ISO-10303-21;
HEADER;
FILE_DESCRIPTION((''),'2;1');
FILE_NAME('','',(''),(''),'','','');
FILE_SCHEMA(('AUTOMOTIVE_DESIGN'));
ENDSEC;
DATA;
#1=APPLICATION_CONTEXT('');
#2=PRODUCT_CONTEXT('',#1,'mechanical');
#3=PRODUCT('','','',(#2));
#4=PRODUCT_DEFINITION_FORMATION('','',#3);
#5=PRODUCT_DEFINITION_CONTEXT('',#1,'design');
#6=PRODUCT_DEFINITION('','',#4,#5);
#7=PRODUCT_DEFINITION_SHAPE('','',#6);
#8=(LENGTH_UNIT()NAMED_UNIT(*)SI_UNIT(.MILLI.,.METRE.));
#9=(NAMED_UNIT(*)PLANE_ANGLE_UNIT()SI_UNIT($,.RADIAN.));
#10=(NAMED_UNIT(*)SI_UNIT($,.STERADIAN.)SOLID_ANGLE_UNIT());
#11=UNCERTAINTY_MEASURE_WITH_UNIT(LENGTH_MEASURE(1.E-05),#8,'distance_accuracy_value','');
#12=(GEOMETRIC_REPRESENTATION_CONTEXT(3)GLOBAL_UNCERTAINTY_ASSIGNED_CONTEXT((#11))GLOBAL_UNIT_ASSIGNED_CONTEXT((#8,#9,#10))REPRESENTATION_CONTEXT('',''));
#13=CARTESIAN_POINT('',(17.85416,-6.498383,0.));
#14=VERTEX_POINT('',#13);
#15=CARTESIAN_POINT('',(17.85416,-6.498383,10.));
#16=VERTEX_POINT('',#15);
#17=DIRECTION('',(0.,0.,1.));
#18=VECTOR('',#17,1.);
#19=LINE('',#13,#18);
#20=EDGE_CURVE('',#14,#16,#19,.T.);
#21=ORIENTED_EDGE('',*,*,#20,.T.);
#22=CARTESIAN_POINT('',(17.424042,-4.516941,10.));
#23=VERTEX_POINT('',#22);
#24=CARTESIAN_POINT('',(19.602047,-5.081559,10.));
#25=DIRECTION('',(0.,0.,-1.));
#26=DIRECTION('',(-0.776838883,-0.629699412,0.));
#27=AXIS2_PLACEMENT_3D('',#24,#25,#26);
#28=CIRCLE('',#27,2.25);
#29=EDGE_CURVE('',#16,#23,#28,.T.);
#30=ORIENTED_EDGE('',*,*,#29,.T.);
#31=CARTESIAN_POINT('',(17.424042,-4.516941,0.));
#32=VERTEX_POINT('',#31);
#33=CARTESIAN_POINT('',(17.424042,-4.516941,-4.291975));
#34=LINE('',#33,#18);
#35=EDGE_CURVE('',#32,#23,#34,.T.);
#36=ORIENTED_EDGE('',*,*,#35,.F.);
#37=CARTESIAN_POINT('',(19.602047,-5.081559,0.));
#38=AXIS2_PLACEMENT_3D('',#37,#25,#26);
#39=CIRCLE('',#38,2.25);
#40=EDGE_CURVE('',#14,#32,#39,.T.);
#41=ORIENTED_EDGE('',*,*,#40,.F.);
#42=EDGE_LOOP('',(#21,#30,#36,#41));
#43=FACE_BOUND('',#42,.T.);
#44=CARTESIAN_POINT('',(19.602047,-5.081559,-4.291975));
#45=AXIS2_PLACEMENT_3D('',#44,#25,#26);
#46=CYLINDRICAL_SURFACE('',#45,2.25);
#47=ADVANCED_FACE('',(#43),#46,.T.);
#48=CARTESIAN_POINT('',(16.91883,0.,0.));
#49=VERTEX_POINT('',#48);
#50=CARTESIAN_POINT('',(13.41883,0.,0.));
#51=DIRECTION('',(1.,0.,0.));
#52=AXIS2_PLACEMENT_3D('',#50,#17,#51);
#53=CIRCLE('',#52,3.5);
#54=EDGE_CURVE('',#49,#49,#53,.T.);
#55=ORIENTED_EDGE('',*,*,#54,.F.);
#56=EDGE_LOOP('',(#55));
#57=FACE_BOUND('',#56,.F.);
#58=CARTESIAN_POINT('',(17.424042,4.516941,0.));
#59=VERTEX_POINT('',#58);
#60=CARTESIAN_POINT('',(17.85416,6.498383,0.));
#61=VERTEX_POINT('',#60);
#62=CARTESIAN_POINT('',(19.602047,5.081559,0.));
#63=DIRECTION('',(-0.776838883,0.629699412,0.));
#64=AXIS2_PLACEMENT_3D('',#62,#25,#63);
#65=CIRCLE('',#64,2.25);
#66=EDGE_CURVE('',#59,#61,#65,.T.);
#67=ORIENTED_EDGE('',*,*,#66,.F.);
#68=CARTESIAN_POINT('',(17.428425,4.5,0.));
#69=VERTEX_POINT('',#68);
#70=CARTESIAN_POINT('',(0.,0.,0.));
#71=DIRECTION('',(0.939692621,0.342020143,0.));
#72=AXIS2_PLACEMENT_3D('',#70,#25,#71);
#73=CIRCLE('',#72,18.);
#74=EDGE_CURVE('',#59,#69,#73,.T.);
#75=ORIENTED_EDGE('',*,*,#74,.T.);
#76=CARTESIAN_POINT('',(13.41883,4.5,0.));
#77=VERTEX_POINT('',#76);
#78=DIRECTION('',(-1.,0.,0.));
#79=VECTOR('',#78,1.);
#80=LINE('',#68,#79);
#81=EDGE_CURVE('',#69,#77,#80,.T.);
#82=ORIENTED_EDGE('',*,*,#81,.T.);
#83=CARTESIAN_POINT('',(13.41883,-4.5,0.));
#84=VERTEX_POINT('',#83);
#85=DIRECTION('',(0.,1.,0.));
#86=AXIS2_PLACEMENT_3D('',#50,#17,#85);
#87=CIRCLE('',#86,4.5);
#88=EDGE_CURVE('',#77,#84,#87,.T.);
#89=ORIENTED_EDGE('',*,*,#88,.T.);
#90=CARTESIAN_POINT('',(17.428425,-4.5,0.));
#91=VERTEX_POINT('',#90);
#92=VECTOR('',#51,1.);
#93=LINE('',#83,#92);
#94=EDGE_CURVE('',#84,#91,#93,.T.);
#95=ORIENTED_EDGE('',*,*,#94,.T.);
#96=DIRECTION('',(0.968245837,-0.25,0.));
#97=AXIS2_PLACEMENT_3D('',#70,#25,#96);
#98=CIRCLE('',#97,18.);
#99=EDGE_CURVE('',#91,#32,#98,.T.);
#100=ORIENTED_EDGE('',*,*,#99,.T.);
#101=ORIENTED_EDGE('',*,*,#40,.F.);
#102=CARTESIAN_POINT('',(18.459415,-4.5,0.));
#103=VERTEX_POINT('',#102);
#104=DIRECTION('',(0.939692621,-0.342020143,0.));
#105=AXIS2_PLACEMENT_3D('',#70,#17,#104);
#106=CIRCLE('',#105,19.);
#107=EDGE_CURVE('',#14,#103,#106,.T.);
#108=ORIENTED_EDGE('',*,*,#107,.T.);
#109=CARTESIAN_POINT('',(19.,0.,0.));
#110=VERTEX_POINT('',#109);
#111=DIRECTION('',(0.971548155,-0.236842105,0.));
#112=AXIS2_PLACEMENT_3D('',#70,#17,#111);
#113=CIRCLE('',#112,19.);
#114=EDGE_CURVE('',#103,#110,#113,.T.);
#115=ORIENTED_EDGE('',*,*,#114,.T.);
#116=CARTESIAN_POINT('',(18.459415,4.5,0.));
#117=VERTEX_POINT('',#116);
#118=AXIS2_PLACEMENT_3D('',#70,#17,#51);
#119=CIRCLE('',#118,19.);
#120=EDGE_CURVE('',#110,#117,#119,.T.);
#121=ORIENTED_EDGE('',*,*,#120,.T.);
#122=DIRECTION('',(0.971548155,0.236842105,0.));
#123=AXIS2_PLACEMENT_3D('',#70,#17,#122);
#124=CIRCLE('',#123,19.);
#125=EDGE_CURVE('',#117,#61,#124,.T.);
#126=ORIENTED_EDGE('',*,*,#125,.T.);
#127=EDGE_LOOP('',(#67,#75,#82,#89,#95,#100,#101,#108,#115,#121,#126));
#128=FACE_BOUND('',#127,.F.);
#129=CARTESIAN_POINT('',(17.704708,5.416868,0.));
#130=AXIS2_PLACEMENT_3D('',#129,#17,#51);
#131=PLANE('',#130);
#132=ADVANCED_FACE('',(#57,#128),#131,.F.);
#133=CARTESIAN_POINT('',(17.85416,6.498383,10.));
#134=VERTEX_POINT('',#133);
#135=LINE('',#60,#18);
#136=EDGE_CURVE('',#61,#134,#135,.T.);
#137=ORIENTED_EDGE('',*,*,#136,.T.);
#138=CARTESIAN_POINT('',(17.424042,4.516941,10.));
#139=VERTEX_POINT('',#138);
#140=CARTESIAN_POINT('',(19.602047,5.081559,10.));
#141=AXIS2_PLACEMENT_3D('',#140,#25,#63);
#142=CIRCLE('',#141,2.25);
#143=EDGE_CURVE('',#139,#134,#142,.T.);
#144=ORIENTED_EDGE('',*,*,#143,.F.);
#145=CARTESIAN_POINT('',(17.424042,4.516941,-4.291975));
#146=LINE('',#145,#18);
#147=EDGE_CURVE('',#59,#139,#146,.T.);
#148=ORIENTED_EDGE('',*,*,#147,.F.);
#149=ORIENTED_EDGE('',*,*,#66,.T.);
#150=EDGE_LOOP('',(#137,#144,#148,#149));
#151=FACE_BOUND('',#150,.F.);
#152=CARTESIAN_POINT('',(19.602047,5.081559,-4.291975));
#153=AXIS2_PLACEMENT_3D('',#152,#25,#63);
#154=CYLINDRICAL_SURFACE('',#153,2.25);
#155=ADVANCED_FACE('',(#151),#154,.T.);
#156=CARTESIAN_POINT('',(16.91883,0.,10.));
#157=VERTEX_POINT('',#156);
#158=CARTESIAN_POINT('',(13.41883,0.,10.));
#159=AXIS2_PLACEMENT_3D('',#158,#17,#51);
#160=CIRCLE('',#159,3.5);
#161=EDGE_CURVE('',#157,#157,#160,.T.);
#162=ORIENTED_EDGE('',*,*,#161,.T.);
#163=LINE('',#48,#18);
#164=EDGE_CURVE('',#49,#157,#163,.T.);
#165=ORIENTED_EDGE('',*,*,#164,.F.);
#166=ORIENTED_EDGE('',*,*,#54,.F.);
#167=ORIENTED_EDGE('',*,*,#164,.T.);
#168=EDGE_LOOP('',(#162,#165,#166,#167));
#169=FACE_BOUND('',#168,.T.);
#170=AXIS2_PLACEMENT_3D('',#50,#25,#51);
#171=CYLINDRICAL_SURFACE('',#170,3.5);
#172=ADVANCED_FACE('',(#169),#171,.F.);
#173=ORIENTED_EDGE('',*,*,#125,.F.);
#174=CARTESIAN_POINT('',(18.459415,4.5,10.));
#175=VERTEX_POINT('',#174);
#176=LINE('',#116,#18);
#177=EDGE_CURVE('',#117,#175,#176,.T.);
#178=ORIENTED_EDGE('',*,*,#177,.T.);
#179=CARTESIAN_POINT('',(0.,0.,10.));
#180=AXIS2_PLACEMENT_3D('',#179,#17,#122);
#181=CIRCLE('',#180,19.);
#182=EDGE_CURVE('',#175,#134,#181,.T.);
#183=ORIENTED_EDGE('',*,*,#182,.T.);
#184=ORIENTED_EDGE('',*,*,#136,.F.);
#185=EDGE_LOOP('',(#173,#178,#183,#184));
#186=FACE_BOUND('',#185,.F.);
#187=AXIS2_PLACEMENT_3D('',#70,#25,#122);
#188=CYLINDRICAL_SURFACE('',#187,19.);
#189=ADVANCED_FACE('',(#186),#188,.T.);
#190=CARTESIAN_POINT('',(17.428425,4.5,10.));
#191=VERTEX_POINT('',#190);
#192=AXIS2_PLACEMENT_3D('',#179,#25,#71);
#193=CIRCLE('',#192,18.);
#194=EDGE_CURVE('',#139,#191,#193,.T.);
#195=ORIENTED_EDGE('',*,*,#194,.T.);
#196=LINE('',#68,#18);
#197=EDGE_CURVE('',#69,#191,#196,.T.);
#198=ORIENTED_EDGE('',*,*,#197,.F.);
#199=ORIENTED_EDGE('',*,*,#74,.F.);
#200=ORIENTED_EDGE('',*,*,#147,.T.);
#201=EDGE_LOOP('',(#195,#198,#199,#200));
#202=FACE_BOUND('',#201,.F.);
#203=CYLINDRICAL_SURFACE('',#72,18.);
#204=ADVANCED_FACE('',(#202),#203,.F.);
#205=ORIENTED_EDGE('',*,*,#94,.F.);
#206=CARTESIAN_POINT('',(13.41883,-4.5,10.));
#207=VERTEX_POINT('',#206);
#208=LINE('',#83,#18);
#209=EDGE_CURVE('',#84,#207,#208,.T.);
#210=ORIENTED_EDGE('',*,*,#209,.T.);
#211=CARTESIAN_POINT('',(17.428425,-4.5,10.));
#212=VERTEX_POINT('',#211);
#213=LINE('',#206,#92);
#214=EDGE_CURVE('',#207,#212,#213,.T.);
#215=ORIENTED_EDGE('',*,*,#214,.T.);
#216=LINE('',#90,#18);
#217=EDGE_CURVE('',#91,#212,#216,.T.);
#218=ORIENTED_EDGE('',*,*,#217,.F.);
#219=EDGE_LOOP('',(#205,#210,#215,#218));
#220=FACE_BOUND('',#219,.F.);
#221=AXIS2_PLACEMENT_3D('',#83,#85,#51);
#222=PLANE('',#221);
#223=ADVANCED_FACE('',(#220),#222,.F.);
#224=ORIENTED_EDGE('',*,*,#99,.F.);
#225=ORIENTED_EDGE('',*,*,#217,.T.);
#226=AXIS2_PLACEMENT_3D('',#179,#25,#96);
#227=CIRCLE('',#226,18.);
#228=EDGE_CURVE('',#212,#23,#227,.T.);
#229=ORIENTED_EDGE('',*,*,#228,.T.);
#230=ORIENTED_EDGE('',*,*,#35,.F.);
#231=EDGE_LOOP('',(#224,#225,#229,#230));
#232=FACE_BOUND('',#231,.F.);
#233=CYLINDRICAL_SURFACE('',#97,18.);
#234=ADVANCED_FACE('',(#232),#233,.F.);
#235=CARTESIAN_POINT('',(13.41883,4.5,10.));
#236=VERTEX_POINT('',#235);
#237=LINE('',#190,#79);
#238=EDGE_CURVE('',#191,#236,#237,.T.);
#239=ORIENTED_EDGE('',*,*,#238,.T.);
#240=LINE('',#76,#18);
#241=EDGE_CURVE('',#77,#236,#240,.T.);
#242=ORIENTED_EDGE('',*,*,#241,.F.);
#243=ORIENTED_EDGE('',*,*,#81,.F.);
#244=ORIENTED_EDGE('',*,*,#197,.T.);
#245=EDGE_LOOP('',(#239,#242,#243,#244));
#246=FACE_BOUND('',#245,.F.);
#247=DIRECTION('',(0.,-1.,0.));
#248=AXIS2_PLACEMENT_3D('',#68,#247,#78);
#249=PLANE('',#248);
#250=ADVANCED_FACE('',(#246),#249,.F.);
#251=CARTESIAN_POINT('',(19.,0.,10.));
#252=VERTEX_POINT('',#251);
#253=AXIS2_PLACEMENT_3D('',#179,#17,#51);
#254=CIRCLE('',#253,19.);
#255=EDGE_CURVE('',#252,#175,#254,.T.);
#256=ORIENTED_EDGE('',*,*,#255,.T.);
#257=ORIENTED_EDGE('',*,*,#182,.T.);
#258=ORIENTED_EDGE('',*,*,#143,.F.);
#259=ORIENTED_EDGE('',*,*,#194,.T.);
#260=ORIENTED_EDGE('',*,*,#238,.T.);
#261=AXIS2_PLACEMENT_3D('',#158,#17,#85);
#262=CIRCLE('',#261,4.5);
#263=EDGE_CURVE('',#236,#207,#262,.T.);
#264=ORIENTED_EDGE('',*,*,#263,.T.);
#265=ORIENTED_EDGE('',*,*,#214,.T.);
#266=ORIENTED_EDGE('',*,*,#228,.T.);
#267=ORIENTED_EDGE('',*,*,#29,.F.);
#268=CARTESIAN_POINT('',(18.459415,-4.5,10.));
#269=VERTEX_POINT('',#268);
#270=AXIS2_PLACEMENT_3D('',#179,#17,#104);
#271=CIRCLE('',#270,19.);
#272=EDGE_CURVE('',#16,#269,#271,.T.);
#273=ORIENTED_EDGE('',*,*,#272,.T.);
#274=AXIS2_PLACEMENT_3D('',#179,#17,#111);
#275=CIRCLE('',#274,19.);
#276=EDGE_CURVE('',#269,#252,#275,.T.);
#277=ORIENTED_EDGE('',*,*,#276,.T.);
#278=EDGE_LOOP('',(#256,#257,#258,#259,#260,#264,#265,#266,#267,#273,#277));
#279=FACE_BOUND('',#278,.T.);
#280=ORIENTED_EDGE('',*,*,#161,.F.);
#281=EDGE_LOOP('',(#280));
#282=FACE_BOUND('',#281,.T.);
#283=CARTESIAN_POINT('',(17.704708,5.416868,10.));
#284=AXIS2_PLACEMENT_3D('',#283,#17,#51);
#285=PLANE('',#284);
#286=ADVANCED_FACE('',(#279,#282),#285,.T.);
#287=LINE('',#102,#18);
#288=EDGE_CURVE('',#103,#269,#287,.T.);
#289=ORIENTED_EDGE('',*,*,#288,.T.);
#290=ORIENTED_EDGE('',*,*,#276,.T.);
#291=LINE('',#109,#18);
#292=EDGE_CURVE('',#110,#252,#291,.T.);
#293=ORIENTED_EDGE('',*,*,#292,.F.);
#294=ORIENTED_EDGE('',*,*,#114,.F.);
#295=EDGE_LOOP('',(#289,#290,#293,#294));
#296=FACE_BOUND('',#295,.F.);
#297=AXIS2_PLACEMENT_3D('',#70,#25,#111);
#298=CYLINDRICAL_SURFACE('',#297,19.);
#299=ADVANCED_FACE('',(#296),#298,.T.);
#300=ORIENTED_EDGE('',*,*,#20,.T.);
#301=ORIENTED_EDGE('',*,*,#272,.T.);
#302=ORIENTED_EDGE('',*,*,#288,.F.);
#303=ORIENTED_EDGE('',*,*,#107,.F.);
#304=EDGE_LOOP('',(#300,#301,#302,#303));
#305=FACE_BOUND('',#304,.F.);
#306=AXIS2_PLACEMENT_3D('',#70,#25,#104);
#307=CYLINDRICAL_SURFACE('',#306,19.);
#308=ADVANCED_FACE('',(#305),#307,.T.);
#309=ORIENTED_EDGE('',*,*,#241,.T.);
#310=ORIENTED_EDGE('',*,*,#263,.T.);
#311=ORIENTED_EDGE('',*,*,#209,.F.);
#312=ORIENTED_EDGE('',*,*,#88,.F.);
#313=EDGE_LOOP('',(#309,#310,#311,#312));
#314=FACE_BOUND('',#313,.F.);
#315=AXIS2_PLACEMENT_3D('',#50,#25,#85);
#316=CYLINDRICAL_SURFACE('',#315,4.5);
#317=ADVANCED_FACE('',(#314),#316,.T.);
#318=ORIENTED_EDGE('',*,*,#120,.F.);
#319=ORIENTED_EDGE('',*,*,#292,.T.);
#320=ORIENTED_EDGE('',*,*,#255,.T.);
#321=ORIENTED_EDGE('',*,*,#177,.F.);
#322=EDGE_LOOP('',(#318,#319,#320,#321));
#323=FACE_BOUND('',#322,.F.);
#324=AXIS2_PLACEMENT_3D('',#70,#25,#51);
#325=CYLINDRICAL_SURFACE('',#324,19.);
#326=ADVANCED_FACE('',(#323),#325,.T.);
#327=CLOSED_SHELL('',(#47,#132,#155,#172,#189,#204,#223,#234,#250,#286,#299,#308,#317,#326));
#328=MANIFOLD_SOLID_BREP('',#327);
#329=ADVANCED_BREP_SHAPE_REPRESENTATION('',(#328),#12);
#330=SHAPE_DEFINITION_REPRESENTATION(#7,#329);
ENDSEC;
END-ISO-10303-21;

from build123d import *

# Parameters (mm, degrees)
F0_R        = 3.5
F1_DEPTH    = 10
F2_T1_DEPTH = 18.5839507528
F2_T3_DEPTH = 18.5839507528


# Not quite as in the source:
# - a fillet or chamfer that OpenCascade refuses, or shapes differently, is made with other operations: its cross-section is extruded or revolved along the edge and cut away or added


with BuildPart() as f1:
    # F0 (on Top) → F1 (new body)
    with BuildSketch(Plane.XY):
        with BuildLine():
            Line((17.4284250579, 4.5), (18.459414942, 4.5))
            ThreePointArc((18.459414942, 4.5), (18.1842599773, 5.507512059), (17.8541597949, 6.4983827232))
            Line((17.8541597949, 6.4983827232), (16.9144671741, 6.1563625799))
            ThreePointArc((16.9144671741, 6.1563625799), (17.191406166, 5.3343747558), (17.4284250579, 4.5))
        make_face()
        with BuildLine():
            ThreePointArc((17.8541597949, -6.4983827232), (18.1842599773, -5.507512059), (18.459414942, -4.5))
            Line((18.459414942, -4.5), (17.4284250579, -4.5))
            ThreePointArc((17.4284250579, -4.5), (17.191406166, -5.3343747558), (16.9144671741, -6.1563625799))
            Line((16.9144671741, -6.1563625799), (17.8541597949, -6.4983827232))
        make_face()
        with BuildLine():
            ThreePointArc((18.459414942, -4.5), (18.8643696409, -2.2661769682), (19, 0))
            ThreePointArc((19, 0), (18.8643696409, 2.2661769682), (18.459414942, 4.5))
            Line((18.459414942, 4.5), (17.4284250579, 4.5))
            ThreePointArc((17.4284250579, 4.5), (17.8565345328, 2.2680772647), (18, 0))
            ThreePointArc((18, 0), (17.8565345328, -2.2680772647), (17.4284250579, -4.5))
            Line((17.4284250579, -4.5), (18.459414942, -4.5))
        make_face()
        with BuildLine():
            ThreePointArc((18, 0), (17.8565345328, 2.2680772647), (17.4284250579, 4.5))
            Line((17.4284250579, 4.5), (13.4188298839, 4.5))
            ThreePointArc((13.4188298839, 4.5), (16.6008103993, 3.1819805153), (17.9188298839, 0))
            ThreePointArc((17.9188298839, 0), (16.6008103993, -3.1819805153), (13.4188298839, -4.5))
            Line((13.4188298839, -4.5), (17.4284250579, -4.5))
            ThreePointArc((17.4284250579, -4.5), (17.8565345328, -2.2680772647), (18, 0))
        make_face()
        with BuildLine():
            ThreePointArc((17.9188298839, 0), (16.6008103993, 3.1819805153), (13.4188298839, 4.5))
            ThreePointArc((13.4188298839, 4.5), (8.9188298839, 0), (13.4188298839, -4.5))
            ThreePointArc((13.4188298839, -4.5), (16.6008103993, -3.1819805153), (17.9188298839, 0))
        make_face()
        with Locations((13.4188298839, 0)):
            Circle(F0_R, mode=Mode.SUBTRACT)
    extrude(amount=F1_DEPTH)

    # F2: fillet of radius 2.25 on 2 edges, made by hand

    # F2_s2 → F2_t1 (cut)
    with BuildSketch(Plane.XY.offset(-4.2919753764)):
        with BuildLine():
            ThreePointArc((17.8541597949, 6.4983827232), (17.4032553622, 5.5588577913), (17.4240420287, 4.5169413745))
            ThreePointArc((17.4240420287, 4.5169413745), (17.1888111585, 5.342730665), (16.9144671741, 6.1563625799))
            Line((16.9144671741, 6.1563625799), (17.8541597949, 6.4983827232))
        make_face()
    extrude(amount=F2_T1_DEPTH, mode=Mode.SUBTRACT)

    # F2_s4 → F2_t3 (cut)
    with BuildSketch(Plane.XY.offset(-4.2919753764)):
        with BuildLine():
            ThreePointArc((17.8541597949, -6.4983827232), (17.4032553622, -5.5588577913), (17.4240420287, -4.5169413745))
            ThreePointArc((17.4240420287, -4.5169413745), (17.1888111585, -5.342730665), (16.9144671741, -6.1563625799))
            Line((16.9144671741, -6.1563625799), (17.8541597949, -6.4983827232))
        make_face()
    extrude(amount=F2_T3_DEPTH, mode=Mode.SUBTRACT)


solid = f1.part
